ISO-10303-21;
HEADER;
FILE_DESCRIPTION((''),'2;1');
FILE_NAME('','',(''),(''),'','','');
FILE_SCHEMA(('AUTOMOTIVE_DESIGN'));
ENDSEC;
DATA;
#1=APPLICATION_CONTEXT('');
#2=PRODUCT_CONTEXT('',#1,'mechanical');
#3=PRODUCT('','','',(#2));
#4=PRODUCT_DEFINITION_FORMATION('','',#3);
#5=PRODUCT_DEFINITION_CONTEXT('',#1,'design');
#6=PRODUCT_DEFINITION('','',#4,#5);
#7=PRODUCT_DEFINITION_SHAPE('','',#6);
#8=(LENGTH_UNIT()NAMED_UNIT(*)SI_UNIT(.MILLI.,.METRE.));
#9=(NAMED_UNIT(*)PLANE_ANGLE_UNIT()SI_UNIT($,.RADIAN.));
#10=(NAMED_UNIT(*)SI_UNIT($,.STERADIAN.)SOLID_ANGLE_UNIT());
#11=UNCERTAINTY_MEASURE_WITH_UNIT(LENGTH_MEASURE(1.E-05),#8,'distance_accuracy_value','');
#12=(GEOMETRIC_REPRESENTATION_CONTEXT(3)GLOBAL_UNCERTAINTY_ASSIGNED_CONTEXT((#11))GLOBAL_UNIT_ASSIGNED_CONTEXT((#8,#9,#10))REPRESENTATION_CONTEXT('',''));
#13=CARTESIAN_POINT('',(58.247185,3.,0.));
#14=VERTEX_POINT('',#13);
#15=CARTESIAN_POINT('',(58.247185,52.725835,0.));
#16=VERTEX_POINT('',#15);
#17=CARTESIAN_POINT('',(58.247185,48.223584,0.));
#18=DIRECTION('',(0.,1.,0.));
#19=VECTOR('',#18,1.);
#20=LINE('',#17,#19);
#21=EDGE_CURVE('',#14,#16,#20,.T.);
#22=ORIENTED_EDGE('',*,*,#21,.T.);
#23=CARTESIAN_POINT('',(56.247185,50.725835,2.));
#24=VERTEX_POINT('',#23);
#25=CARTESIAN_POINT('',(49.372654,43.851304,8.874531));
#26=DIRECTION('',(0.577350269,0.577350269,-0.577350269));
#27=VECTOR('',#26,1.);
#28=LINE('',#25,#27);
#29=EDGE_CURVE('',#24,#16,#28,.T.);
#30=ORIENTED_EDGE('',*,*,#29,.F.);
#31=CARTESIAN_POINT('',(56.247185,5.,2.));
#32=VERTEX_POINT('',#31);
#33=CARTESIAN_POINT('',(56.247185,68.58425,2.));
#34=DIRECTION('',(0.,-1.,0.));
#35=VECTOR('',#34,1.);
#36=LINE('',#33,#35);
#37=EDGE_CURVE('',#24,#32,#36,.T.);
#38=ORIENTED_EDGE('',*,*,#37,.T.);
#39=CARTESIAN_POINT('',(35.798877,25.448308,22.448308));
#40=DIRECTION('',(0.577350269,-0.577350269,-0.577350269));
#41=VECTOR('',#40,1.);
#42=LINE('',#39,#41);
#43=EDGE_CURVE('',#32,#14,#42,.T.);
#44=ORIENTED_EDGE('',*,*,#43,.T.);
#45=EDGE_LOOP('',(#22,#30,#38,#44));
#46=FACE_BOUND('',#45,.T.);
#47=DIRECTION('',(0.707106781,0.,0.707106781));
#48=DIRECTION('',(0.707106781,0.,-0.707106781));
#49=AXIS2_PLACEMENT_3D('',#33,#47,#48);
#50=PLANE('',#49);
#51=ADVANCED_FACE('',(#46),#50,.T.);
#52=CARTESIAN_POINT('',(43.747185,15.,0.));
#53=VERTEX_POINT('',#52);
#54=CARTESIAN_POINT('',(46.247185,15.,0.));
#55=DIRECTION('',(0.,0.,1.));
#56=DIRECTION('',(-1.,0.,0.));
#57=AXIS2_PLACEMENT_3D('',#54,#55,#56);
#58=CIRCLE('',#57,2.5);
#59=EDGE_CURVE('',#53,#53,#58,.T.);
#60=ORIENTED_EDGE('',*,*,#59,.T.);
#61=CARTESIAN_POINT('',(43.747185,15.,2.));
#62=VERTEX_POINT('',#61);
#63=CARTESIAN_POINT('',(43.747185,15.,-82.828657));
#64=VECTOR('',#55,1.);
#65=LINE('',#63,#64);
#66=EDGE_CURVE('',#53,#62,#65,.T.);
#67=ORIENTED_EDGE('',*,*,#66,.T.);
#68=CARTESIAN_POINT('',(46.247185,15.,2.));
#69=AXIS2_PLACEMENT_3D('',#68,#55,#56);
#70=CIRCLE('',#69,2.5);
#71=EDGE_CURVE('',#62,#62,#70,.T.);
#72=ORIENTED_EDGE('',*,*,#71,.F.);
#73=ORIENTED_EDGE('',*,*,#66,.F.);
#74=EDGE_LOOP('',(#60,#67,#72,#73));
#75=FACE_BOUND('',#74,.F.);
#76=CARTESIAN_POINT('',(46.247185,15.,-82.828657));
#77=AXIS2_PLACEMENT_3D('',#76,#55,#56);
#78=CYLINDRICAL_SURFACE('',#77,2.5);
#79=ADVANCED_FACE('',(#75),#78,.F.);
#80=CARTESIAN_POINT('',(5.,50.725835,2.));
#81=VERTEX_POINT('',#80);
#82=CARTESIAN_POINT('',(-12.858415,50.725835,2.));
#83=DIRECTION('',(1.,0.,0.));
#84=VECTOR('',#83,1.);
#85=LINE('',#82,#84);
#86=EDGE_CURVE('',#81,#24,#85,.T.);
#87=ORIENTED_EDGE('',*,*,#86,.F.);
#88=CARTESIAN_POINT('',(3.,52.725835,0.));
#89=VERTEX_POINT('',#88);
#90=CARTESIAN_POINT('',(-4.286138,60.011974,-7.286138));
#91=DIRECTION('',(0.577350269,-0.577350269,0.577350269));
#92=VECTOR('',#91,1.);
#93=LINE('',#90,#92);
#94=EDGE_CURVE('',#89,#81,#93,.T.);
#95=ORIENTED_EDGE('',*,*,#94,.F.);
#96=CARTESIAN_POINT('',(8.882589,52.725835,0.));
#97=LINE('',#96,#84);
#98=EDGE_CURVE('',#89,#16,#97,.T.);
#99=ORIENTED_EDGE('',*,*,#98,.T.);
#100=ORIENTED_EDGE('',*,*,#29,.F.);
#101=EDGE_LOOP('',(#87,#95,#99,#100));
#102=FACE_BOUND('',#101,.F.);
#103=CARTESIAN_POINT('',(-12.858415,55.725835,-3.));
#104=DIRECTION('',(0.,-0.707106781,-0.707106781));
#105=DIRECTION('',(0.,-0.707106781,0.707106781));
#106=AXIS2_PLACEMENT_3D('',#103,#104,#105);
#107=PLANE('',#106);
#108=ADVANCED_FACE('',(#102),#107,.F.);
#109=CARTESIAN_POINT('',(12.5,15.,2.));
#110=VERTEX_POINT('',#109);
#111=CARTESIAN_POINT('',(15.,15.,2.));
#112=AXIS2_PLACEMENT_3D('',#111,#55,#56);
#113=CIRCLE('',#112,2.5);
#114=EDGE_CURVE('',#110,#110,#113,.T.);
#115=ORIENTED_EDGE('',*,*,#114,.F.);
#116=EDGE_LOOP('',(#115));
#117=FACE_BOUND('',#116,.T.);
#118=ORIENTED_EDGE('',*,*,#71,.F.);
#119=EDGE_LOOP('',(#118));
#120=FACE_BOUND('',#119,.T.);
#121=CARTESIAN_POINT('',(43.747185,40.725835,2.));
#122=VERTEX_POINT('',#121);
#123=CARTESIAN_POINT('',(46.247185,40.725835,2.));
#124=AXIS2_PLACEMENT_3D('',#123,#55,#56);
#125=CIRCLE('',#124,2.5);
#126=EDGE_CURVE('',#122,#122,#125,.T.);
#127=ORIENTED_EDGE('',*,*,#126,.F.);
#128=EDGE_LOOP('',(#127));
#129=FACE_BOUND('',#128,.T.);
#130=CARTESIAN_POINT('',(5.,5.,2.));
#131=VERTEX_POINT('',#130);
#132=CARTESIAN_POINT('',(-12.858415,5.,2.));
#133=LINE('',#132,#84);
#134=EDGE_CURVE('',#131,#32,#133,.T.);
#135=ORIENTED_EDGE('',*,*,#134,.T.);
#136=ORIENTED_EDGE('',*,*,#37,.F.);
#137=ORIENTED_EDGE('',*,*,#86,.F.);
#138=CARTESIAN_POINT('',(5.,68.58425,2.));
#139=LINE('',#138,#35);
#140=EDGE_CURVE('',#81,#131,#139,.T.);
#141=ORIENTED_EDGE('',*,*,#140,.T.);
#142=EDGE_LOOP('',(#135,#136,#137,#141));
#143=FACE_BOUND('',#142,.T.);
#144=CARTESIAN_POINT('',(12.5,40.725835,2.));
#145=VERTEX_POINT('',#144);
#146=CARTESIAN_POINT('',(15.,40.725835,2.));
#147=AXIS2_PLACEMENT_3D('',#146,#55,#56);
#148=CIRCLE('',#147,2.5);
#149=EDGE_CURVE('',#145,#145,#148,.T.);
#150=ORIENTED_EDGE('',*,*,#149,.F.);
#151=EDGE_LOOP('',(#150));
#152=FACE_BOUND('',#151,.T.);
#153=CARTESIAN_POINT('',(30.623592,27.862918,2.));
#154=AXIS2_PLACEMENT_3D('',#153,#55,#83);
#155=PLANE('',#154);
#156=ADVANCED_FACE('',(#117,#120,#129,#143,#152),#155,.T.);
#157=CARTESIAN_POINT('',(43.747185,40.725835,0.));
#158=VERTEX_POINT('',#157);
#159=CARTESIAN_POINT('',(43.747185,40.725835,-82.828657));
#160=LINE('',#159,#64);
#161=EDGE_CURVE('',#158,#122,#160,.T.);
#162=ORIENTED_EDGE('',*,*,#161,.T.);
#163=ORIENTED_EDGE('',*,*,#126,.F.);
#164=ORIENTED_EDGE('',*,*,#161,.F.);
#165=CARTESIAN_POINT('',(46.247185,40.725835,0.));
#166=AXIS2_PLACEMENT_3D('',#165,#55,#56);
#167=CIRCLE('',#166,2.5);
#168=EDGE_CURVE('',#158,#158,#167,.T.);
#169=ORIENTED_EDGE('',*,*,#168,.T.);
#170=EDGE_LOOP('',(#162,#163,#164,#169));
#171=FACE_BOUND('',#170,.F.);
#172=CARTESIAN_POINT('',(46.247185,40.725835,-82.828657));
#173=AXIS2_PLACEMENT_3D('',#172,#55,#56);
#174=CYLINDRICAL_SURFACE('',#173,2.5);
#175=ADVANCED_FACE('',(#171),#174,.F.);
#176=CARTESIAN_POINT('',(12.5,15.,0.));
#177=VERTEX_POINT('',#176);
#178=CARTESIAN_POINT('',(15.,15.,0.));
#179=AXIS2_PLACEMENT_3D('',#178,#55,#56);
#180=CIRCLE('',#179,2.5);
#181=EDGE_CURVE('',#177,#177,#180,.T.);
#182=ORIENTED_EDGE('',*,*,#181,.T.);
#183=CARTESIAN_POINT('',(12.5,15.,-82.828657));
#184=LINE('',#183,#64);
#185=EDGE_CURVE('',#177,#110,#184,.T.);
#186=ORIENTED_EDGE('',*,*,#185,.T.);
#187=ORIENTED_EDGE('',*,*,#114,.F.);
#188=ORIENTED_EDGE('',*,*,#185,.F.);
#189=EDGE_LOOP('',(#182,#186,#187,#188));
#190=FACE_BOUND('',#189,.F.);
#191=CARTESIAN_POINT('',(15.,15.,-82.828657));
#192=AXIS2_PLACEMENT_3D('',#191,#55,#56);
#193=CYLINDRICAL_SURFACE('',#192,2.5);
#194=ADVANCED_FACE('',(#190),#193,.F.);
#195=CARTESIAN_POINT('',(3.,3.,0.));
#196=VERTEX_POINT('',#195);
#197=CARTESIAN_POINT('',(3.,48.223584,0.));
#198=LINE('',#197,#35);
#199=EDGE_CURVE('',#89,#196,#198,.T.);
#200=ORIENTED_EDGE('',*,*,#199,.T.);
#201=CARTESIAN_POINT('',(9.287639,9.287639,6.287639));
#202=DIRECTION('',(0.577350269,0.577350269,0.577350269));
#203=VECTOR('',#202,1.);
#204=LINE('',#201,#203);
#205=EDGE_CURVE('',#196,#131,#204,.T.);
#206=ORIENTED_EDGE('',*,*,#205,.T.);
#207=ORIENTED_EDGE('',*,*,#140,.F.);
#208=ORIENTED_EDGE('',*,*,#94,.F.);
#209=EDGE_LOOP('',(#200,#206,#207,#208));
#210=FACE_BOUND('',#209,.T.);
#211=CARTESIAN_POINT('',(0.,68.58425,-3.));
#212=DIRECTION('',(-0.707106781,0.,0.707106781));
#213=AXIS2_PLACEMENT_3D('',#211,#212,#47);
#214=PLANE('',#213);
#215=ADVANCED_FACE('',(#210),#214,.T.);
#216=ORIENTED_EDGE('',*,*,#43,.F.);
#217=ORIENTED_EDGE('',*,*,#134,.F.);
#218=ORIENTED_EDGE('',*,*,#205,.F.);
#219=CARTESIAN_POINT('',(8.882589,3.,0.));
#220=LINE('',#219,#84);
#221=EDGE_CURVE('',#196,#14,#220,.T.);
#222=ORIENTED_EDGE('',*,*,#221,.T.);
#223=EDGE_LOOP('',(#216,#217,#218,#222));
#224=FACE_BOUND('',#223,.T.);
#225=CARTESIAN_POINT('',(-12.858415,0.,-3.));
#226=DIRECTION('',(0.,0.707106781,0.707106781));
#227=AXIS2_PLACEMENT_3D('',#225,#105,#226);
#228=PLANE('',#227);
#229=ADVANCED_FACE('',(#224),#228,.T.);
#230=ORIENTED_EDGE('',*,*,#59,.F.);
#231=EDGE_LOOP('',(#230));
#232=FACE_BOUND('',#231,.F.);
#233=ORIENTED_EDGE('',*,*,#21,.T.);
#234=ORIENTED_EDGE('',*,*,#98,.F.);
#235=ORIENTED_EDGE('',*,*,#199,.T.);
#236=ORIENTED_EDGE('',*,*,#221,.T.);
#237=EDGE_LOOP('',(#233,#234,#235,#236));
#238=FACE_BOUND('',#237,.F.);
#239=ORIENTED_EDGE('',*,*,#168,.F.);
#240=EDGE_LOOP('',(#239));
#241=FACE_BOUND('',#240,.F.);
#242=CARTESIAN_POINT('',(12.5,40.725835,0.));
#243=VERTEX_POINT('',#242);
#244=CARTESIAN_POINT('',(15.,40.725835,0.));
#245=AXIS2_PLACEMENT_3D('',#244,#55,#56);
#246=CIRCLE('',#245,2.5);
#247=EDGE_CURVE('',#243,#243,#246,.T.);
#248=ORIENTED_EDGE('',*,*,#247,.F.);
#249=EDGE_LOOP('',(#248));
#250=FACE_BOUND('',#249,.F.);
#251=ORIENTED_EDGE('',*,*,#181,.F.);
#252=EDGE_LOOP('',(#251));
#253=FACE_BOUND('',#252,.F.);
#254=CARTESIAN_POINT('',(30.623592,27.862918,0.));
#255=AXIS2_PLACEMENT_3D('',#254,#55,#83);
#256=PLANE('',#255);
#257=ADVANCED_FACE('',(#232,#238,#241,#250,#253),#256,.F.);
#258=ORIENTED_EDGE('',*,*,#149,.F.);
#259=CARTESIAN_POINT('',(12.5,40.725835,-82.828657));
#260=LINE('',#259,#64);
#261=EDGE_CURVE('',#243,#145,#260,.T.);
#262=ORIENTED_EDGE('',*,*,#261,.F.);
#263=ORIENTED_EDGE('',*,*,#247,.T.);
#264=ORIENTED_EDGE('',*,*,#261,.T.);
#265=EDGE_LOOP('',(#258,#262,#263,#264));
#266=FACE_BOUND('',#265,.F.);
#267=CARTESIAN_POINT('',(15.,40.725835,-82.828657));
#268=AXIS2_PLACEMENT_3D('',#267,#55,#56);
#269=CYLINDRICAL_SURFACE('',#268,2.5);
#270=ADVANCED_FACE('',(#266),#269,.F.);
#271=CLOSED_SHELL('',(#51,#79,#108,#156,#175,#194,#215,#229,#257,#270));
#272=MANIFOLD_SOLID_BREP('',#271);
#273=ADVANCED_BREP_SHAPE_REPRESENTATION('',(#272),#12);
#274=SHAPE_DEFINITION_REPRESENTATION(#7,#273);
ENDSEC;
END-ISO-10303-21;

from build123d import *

# Parameters (mm, degrees)
F0_W        = 61.2471848726
F0_H        = 55.7258352637
F1_DEPTH    = 2
F4_D        = 5
F5_T1_DEPTH = 81.4426651434
F5_T3_DEPTH = 86.9640147523


# Not quite as in the source:
# - a fillet or chamfer that OpenCascade refuses, or shapes differently, is made with other operations: its cross-section is extruded or revolved along the edge and cut away or added


with BuildPart() as f1:
    # F0 (on Top) → F1 (new body)
    with BuildSketch(Plane.XY):
        with Locations((30.6235924363, 27.8629176319)):
            Rectangle(F0_W, F0_H)
    extrude(amount=F1_DEPTH)

    # F4 (through all)
    with Locations(Plane(origin=(0, 0, 0), x_dir=(1, 0, 0), z_dir=(0, 0, -1))):
        with Locations((15, -40.7258352637), (46.2471848726, -40.7258352637), (15, -15), (46.2471848726, -15)):
            Hole(F4_D / 2)

    # F5: chamfer of 5 on 4 edges, made by hand

    # F5_s2 → F5_t1 (cut)
    with BuildSketch(Plane.XZ.offset(-68.5842502036)):
        Polygon((0, -3), (5, 2), (0, 2), align=None)
        Polygon((56.2471848726, 2), (61.2471848726, -3), (61.2471848726, 2), align=None)
    extrude(amount=F5_T1_DEPTH, mode=Mode.SUBTRACT)

    # F5_s4 → F5_t3 (cut)
    with BuildSketch(Plane.YZ.offset(-12.8584149398)):
        Polygon((55.7258352637, -3), (50.7258352637, 2), (55.7258352637, 2), align=None)
        Polygon((0, -3), (5, 2), (0, 2), align=None)
    extrude(amount=F5_T3_DEPTH, mode=Mode.SUBTRACT)


solid = f1.part
